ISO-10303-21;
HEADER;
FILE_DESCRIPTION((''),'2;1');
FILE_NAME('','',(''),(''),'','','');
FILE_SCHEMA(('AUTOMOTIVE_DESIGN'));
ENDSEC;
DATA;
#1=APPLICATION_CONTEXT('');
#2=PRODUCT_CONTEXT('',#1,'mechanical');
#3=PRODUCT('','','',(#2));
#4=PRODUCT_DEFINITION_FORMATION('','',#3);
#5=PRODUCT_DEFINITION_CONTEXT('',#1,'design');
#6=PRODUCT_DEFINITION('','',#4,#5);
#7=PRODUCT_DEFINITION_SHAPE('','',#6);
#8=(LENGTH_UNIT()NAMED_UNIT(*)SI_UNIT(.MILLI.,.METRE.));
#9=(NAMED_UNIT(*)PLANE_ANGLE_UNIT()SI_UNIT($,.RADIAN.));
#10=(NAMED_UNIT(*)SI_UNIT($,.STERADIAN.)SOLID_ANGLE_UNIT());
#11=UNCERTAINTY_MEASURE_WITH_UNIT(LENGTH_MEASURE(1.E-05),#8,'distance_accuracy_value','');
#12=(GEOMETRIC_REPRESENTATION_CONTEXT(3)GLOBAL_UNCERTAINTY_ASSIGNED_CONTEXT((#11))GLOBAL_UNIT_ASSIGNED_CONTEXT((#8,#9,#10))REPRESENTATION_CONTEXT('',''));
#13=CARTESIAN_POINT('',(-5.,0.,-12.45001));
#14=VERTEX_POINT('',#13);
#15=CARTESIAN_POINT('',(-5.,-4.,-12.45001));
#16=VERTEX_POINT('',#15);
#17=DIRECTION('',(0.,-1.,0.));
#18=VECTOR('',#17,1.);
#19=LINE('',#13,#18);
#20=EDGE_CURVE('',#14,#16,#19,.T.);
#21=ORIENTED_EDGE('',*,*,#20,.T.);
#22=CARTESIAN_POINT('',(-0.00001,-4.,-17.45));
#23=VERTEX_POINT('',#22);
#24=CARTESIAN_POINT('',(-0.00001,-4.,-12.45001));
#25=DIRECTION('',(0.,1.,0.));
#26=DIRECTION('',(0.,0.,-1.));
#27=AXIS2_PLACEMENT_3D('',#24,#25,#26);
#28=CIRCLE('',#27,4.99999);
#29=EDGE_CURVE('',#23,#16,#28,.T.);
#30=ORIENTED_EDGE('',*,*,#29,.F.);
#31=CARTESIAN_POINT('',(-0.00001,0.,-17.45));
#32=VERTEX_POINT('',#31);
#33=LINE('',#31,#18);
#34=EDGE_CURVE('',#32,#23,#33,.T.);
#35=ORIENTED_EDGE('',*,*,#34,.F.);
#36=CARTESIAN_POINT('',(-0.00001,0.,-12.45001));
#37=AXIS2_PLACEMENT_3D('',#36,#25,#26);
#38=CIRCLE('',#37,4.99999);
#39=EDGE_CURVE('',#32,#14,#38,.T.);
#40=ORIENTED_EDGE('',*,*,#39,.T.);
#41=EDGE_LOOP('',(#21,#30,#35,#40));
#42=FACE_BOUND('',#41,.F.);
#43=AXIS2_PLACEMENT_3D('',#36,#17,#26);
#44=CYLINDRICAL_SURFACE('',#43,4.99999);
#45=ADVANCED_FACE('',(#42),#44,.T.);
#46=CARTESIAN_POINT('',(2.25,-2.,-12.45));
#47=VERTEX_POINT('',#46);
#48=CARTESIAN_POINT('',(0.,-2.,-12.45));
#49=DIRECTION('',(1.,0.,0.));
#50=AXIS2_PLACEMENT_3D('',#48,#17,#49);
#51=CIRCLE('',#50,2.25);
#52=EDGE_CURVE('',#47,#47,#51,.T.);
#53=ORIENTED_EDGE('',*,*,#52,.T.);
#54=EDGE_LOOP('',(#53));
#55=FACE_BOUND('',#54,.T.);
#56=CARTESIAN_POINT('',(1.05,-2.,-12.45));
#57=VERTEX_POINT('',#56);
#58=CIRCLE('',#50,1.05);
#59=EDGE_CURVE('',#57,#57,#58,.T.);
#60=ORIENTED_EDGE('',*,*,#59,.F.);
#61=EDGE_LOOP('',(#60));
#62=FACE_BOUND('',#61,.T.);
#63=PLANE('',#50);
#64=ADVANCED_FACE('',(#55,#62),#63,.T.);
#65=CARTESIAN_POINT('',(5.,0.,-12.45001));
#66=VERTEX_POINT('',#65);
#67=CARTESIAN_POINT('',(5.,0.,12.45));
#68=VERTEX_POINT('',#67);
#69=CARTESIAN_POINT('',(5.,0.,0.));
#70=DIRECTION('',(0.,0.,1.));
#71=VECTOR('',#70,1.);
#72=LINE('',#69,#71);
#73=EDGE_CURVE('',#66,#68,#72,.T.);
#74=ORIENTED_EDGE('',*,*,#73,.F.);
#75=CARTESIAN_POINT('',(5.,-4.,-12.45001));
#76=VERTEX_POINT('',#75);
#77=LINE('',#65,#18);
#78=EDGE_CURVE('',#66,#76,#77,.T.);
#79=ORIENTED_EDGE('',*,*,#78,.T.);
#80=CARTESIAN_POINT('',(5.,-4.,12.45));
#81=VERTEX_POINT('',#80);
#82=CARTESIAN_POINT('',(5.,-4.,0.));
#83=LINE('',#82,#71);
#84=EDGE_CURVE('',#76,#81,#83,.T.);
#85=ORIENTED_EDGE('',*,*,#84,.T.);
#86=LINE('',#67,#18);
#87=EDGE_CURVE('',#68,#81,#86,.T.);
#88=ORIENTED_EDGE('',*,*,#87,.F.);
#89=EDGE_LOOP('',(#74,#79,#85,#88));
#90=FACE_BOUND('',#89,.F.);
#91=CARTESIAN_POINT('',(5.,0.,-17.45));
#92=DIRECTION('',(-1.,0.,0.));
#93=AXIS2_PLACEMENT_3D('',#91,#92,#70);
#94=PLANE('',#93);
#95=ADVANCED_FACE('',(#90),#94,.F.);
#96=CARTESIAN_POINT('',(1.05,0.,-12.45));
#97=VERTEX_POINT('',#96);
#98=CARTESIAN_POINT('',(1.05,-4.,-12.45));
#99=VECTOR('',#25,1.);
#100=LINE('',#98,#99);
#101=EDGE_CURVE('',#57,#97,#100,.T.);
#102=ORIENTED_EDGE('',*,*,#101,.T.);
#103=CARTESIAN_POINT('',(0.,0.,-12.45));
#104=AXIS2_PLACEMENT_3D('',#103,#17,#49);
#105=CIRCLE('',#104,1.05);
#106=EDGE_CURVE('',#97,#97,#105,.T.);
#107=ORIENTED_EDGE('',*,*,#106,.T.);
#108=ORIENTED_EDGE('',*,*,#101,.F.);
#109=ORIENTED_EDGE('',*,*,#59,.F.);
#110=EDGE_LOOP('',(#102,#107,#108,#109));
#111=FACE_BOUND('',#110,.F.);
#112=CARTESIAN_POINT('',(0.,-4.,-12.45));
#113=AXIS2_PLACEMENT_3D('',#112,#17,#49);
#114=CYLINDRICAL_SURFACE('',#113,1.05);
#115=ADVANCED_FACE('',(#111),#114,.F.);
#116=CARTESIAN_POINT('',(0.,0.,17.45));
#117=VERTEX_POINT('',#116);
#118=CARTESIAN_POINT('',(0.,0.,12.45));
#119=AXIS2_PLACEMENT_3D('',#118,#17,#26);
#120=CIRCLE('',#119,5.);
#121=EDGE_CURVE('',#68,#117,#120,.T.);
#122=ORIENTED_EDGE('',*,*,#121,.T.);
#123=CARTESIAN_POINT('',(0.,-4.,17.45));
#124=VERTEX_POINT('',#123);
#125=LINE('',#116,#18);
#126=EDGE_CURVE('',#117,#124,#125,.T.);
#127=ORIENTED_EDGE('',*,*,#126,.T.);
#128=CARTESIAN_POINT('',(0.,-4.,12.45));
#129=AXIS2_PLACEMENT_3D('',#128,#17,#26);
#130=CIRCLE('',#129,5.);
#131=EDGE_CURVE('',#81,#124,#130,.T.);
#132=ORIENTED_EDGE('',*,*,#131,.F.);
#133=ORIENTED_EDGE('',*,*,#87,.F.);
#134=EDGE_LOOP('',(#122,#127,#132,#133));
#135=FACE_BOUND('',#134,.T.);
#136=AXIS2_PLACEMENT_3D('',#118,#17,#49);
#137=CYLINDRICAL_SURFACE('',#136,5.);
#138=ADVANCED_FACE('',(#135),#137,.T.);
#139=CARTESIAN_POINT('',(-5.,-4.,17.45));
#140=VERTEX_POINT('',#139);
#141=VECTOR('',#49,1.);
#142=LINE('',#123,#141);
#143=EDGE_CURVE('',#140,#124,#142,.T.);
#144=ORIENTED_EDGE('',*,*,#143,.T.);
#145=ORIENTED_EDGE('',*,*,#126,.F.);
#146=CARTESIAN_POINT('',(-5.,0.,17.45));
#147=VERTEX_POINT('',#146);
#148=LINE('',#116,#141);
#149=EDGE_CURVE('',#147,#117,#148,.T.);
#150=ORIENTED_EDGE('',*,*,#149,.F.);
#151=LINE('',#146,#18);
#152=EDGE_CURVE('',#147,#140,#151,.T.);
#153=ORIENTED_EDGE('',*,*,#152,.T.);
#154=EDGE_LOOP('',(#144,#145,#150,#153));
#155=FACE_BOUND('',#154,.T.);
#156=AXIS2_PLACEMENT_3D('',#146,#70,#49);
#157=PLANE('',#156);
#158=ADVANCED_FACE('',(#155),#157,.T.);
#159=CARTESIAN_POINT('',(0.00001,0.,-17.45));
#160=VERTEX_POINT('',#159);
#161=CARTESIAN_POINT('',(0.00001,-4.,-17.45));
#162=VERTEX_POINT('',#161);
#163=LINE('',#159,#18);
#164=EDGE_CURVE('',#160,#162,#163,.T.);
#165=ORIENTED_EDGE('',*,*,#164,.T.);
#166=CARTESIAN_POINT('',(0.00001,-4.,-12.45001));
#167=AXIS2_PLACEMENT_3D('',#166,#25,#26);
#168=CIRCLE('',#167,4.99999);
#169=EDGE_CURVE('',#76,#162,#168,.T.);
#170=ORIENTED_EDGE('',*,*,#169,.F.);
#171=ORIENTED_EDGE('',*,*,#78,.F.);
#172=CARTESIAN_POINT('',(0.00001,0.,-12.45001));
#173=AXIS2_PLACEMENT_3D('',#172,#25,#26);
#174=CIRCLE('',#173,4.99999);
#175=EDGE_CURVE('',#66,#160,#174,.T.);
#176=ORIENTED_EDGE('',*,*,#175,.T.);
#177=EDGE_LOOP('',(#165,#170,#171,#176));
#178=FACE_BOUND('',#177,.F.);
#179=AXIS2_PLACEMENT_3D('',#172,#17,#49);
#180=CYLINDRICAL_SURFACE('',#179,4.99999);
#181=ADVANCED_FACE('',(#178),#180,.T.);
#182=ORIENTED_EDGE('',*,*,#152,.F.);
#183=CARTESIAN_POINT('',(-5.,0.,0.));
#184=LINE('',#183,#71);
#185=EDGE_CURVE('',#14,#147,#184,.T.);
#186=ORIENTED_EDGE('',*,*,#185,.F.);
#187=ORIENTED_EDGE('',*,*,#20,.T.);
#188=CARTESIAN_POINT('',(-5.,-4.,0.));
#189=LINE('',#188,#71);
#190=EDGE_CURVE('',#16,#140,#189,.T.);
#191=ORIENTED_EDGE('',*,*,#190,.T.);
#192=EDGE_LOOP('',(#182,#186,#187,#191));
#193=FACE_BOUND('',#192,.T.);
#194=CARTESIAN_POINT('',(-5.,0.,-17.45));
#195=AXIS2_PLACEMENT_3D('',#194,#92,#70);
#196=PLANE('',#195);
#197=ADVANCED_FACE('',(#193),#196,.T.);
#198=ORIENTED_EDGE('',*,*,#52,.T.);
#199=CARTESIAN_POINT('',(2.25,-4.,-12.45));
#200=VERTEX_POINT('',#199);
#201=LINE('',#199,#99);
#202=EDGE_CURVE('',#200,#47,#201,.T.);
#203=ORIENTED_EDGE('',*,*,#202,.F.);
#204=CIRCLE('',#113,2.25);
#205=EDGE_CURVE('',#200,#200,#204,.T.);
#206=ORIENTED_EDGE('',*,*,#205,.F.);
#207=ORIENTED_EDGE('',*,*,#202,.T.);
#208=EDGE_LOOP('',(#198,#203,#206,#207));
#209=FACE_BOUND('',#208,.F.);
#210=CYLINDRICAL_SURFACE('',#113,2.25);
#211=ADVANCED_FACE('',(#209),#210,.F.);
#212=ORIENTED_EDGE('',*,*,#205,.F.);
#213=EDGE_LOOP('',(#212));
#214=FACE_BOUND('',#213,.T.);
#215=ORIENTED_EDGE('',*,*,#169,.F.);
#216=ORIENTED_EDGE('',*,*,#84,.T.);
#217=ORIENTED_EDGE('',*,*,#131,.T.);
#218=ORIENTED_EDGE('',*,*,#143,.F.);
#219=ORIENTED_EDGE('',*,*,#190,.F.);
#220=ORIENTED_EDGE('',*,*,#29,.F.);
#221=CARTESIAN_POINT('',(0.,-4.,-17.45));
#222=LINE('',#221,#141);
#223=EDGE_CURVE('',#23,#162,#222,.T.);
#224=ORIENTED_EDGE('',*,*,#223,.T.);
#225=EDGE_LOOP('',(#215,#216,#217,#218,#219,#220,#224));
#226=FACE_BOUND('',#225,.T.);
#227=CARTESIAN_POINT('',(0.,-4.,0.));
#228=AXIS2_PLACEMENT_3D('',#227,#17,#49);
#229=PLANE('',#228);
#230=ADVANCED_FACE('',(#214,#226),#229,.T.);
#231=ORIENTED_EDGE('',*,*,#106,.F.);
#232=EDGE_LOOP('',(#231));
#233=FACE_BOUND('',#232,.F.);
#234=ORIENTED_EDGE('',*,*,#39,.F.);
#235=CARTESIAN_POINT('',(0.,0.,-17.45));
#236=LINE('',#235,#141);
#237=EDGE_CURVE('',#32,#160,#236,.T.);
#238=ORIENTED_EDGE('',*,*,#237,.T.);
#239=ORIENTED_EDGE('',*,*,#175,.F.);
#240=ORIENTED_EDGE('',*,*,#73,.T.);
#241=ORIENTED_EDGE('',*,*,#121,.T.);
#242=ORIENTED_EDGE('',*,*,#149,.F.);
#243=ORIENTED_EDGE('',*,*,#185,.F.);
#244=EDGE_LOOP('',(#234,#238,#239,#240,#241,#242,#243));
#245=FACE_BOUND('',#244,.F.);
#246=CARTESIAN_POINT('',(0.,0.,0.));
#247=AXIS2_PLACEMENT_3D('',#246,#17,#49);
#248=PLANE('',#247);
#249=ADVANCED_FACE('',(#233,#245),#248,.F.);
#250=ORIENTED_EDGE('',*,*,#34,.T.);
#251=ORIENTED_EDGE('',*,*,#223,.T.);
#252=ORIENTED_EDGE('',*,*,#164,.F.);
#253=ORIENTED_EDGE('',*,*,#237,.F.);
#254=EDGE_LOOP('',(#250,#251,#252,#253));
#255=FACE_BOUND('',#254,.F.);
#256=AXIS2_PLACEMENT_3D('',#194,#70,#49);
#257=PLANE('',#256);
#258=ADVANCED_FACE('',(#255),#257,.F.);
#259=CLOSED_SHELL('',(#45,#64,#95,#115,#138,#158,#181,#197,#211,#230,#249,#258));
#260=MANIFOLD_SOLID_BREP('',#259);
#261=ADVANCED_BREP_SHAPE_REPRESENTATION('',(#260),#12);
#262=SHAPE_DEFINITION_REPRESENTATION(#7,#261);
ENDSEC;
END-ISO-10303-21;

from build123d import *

# Parameters (mm, degrees)
F0_W     = 10
F0_H     = 34.9
F1_DEPTH = 4
F2_R     = 5
F3_R     = 4.99999
F4_R     = 2.25
F4_R_2   = 1.05
F5_DEPTH = 2
F6_DEPTH = 5


# Not quite as in the source:
# - a fillet or chamfer is up to 0.001 mm smaller than in the source, because OpenCascade refuses the exact size


with BuildPart() as f1:
    # F0 (on Front) → F1 (new body)
    with BuildSketch(Plane.XZ):
        Rectangle(F0_W, F0_H)
    extrude(amount=F1_DEPTH)

    # F2
    f2_edges = [f1.edges().sort_by_distance(p)[0] for p in [
        (5, -2, 17.45),
    ]]
    fillet(f2_edges, radius=F2_R)

    # F3 (radius 5 in the source; OpenCascade refuses exactly that, so slightly less here)
    f3_edges = [f1.edges().sort_by_distance(p)[0] for p in [
        (5, -2, -17.45),
        (-5, -2, -17.45),
    ]]
    fillet(f3_edges, radius=F3_R)

    # F4 (on face) → F5 (cut)
    with BuildSketch(Plane.XZ.offset(4)):
        with Locations((0, -12.45)):
            Circle(F4_R)
        with Locations((0, -12.45)):
            Circle(F4_R_2, mode=Mode.SUBTRACT)
    extrude(amount=-F5_DEPTH, mode=Mode.SUBTRACT)

    # F6 (cut): a face of the model
    f6_faces = [f1.faces().sort_by_distance(p)[0] for p in [
        (0, -4, -12.45),
    ]]
    extrude(f6_faces, amount=-F6_DEPTH, mode=Mode.SUBTRACT)


solid = f1.part
